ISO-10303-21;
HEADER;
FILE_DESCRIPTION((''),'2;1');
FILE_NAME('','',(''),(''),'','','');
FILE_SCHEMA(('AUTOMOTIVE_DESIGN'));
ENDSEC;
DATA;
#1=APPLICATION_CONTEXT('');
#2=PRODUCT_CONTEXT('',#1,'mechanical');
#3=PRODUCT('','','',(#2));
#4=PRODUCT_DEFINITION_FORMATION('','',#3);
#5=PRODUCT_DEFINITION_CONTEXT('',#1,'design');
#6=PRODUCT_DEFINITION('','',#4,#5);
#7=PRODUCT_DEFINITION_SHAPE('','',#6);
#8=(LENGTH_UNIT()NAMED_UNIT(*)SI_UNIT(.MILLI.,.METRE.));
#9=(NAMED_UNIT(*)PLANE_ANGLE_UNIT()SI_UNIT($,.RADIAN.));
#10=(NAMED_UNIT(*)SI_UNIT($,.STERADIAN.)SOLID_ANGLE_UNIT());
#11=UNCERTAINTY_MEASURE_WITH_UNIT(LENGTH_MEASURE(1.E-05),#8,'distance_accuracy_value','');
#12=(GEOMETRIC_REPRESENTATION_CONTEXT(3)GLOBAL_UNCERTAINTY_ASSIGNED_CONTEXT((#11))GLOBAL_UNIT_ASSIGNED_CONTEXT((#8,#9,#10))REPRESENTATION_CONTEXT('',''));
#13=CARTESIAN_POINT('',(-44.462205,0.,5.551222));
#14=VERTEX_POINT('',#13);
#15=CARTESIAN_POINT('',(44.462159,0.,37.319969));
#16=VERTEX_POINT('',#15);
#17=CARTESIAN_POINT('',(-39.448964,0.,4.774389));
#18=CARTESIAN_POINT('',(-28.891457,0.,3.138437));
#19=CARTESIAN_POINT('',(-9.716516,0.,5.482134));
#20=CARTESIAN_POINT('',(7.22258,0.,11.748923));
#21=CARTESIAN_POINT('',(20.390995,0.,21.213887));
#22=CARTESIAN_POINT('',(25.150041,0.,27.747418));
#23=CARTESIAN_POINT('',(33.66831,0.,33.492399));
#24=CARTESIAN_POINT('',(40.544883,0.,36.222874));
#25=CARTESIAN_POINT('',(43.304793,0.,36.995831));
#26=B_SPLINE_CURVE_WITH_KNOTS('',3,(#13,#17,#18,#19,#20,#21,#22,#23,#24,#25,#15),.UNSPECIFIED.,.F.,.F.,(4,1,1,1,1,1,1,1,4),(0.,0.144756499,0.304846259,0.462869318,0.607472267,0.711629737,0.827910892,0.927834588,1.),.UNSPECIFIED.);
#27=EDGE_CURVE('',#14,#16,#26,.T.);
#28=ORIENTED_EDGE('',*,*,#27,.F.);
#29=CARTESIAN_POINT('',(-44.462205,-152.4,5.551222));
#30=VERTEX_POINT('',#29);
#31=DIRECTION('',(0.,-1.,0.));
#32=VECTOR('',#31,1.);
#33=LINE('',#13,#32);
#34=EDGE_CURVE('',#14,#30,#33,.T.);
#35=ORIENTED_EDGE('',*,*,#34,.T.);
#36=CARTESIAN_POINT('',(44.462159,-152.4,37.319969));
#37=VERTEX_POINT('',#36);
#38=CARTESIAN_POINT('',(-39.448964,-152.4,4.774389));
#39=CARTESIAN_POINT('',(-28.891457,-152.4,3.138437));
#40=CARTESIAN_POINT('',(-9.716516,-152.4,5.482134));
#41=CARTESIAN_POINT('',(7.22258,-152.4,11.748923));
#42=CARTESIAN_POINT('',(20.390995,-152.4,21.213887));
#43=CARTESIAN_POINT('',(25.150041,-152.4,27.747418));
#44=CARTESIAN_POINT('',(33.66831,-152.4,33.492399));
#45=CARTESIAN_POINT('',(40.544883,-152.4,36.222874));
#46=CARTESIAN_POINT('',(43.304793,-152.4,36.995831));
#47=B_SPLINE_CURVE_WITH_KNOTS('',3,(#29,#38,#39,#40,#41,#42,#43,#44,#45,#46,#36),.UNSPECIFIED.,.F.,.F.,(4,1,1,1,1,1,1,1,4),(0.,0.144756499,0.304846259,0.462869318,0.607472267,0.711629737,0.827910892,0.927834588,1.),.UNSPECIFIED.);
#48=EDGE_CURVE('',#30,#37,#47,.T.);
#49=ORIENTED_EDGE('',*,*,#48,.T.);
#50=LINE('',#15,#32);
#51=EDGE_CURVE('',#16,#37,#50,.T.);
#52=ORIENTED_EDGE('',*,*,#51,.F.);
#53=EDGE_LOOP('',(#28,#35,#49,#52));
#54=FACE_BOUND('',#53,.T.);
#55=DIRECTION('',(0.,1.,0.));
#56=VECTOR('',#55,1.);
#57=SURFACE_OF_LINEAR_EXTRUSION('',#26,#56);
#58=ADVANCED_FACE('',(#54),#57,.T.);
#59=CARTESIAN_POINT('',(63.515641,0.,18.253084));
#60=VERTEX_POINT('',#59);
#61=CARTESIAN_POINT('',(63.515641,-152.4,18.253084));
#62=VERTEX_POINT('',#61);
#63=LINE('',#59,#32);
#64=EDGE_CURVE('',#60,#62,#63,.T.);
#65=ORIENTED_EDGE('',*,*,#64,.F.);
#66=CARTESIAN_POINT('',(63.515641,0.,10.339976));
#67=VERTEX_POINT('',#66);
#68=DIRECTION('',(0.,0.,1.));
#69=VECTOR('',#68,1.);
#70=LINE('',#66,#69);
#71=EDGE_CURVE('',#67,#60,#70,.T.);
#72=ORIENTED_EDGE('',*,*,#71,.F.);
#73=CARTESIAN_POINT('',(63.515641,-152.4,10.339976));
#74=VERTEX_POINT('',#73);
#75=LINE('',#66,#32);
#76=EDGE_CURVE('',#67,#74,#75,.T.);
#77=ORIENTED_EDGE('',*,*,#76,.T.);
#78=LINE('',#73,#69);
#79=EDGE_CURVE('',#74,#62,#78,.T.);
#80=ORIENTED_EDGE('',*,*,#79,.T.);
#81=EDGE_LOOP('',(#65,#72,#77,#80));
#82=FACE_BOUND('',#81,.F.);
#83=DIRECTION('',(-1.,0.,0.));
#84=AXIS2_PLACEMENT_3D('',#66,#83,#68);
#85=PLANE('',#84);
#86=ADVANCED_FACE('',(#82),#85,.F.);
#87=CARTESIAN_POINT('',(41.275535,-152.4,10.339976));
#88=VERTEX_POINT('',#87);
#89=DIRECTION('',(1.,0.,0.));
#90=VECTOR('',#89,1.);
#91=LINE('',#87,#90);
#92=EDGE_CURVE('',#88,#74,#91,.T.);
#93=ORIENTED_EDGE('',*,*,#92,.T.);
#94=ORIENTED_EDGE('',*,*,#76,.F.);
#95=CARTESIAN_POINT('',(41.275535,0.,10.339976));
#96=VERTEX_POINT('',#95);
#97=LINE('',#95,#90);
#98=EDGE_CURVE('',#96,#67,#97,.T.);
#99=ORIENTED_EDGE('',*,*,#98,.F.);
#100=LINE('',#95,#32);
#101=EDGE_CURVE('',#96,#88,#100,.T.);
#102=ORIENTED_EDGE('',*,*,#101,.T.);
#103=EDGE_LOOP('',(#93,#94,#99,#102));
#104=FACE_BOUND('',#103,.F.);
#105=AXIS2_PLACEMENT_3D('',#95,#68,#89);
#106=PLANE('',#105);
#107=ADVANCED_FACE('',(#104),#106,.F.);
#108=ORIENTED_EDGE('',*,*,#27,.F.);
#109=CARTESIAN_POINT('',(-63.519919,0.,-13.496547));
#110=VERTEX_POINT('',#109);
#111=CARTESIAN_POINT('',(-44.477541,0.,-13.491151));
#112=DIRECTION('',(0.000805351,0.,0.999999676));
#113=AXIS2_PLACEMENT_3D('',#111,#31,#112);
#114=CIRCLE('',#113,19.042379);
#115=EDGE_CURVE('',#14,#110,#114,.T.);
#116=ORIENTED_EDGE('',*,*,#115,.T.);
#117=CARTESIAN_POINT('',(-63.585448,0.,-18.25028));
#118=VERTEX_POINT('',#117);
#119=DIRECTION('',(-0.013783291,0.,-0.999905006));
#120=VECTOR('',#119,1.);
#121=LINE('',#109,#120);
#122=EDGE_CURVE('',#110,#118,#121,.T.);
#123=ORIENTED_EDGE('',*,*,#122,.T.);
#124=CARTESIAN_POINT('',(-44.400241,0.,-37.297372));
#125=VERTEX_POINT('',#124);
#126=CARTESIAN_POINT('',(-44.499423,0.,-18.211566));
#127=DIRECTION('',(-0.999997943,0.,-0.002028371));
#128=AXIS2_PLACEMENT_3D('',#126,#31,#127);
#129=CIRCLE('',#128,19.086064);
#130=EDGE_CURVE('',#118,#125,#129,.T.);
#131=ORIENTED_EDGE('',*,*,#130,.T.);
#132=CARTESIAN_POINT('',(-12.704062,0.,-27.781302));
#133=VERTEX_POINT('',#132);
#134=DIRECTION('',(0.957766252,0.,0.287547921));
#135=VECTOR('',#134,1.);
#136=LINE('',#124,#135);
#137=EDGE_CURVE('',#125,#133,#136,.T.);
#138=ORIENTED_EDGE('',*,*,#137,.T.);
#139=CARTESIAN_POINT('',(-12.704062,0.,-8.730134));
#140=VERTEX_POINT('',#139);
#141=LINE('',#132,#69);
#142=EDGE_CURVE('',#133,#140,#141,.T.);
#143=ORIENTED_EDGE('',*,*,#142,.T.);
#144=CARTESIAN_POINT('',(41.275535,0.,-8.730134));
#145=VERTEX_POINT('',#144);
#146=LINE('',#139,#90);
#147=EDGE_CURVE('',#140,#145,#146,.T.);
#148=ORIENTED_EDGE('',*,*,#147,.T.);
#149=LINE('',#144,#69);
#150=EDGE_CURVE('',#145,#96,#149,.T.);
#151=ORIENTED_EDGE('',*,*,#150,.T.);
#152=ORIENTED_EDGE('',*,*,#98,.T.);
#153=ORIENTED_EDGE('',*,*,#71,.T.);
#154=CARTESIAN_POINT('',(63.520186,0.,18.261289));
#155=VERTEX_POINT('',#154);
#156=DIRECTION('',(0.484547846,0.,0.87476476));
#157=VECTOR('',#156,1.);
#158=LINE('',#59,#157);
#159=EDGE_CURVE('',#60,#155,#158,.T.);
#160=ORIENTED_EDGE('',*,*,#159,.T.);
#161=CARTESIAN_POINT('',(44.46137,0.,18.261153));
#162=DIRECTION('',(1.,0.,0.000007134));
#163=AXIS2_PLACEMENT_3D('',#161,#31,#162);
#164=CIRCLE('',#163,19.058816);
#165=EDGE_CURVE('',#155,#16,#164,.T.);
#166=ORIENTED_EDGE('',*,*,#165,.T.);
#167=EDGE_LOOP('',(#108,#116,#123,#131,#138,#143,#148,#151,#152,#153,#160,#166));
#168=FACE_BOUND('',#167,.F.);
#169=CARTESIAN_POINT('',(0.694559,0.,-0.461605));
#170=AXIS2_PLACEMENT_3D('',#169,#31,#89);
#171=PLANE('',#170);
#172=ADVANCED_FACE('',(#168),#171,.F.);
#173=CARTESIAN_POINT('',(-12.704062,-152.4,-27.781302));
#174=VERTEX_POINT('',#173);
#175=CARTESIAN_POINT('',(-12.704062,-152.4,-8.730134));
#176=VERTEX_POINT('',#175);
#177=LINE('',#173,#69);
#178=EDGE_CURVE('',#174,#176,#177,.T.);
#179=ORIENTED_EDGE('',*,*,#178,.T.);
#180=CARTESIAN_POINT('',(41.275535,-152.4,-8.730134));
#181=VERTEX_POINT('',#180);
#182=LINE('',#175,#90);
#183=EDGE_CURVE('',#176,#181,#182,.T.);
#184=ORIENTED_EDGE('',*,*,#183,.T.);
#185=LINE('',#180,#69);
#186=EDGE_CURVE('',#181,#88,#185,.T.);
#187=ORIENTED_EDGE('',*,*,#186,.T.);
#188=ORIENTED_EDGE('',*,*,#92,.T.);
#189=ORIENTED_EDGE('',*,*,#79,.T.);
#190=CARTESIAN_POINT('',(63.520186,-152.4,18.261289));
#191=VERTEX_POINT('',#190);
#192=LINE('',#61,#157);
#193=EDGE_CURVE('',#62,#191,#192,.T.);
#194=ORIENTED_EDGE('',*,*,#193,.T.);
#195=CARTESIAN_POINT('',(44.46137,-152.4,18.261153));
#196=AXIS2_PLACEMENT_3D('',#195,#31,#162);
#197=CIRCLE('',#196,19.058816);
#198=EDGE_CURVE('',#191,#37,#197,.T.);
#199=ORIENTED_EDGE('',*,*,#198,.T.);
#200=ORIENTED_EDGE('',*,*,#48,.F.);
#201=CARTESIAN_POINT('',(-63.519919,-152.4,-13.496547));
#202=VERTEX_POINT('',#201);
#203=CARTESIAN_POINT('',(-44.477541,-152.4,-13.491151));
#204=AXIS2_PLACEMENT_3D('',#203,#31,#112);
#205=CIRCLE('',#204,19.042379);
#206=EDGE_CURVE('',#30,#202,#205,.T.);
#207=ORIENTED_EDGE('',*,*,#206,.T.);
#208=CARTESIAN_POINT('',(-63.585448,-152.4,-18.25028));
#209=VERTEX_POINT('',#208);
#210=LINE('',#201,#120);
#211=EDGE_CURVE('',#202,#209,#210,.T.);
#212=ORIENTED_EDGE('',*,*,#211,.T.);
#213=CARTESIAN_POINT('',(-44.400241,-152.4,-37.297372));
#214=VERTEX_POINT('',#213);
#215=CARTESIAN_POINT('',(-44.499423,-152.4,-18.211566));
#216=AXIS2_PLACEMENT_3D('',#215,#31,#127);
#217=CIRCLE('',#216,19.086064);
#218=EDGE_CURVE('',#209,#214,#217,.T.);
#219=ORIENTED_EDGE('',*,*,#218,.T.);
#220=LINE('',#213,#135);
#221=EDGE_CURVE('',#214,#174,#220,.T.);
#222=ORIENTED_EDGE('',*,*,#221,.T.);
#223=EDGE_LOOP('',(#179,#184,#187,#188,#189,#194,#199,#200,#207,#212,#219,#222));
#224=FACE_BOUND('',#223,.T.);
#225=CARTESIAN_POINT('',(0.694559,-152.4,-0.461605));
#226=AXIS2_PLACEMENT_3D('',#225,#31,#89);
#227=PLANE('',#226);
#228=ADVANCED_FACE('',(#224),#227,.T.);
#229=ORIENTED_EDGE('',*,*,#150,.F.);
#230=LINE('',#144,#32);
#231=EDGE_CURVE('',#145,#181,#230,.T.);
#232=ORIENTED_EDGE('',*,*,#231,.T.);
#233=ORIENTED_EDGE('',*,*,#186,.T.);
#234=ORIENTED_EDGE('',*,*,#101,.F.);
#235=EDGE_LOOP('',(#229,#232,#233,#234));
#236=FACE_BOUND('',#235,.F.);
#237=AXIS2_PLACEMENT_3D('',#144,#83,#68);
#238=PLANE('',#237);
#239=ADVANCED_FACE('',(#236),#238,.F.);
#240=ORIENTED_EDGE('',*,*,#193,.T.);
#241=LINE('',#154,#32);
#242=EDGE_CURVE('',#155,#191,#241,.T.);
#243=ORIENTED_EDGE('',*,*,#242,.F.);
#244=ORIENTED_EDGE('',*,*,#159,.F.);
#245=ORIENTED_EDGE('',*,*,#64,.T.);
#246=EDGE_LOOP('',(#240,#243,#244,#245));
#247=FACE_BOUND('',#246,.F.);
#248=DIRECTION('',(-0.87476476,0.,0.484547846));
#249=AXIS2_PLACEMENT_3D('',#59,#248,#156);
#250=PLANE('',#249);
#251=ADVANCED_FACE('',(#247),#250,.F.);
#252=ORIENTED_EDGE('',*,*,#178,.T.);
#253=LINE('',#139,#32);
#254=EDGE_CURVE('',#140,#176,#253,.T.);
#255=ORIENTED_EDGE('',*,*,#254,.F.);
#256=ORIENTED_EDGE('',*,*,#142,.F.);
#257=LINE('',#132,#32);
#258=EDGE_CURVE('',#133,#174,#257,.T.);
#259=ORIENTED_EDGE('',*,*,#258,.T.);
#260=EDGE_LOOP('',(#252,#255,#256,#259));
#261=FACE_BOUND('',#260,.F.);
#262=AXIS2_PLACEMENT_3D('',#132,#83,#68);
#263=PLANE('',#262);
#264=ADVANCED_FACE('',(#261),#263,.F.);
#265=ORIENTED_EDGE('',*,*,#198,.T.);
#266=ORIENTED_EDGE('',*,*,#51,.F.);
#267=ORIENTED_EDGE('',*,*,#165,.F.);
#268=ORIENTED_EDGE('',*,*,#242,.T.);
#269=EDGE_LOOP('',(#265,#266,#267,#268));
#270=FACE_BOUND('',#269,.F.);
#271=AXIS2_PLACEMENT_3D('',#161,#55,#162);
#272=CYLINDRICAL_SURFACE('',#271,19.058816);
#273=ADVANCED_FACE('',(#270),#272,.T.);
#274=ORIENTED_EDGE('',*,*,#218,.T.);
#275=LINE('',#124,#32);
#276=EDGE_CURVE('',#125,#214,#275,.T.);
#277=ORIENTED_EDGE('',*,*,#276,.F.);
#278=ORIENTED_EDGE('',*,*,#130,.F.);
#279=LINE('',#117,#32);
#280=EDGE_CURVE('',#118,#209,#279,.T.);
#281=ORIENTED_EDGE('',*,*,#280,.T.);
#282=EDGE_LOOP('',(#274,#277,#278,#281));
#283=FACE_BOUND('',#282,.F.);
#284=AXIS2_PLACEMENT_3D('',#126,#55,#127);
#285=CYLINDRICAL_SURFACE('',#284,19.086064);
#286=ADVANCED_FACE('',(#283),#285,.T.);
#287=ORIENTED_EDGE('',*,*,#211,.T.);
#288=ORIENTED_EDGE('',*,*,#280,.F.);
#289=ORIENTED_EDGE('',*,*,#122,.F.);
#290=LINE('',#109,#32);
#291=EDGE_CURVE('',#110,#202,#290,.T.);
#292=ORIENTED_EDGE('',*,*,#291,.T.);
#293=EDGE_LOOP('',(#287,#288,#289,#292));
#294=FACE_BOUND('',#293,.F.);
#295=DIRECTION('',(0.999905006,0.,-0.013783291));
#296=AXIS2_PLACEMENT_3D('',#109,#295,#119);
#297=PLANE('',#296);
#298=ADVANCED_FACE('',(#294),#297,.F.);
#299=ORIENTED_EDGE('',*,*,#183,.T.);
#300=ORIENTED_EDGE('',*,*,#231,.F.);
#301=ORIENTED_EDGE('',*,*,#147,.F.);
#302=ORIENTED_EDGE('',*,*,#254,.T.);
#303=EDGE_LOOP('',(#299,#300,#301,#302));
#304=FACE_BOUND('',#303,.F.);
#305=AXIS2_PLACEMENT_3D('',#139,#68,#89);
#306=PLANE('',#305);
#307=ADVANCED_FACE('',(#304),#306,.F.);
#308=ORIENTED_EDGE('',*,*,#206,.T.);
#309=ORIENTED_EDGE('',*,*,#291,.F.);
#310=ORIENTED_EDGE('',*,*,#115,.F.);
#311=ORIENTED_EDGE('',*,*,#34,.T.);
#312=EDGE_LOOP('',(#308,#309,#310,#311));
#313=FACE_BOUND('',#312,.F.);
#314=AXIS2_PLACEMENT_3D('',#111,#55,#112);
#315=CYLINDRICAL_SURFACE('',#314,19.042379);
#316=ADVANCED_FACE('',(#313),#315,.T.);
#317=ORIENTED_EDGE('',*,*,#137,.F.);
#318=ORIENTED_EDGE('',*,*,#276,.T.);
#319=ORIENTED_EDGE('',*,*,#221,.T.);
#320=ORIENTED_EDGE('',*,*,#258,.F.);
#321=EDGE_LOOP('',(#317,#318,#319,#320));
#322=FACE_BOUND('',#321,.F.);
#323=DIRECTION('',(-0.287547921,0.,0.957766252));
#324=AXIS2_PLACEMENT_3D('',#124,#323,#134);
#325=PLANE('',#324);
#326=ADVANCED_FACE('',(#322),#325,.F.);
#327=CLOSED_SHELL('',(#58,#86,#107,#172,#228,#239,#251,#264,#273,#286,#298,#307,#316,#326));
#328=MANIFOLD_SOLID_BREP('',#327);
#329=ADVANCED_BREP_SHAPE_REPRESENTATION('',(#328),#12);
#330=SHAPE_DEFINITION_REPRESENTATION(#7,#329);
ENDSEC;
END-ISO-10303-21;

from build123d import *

# Parameters (mm, degrees)
F1_DEPTH = 152.4


# Not quite as in the source:
# - a feature of the source that left no trace in its solid (it failed there, or was rolled back) is left out


with BuildPart() as f1:
    # F0 (on Front) → F1 (new body)
    with BuildSketch(Plane.XZ):
        with BuildLine():
            Line((63.5156407952, 10.3399762884), (63.5156407952, 18.2530842721))
            Line((63.5156407952, 18.2530842721), (63.5201856653, 18.2612892249))
            ThreePointArc((63.5201856653, 18.2612892249), (57.9382188033, 31.7375402421), (44.462159276, 37.3199693859))
            add(Edge.make_bspline(
                [(-44.4622051984, 5.5512220147), (-39.4489640202, 4.7743889629), (-28.8914565164, 3.1384371939), (-9.7165157973, 5.4821340103), (7.2225801678, 11.7489232999), (20.3909952314, 21.2138869863), (25.1500405302, 27.747417878), (33.6683098111, 33.4923986759), (40.5448826371, 36.2228742762), (43.3047932524, 36.9958307759), (44.462159276, 37.3199693859)],
                knots=[0, 0, 0, 0, 0.1447564987, 0.3048462595, 0.4628693182, 0.6074722668, 0.711629737, 0.827910892, 0.927834588, 1, 1, 1, 1], degree=3))
            ThreePointArc((-44.4622051984, 5.5512220147), (-57.9390215503, -0.0226415893), (-63.5199193484, -13.4965465253))
            Line((-63.5199193484, -13.4965465253), (-63.5854476605, -18.2502795355))
            ThreePointArc((-63.5854476605, -18.2502795355), (-57.9464666974, -31.7561163984), (-44.400241226, -37.2973717749))
            Line((-44.400241226, -37.2973717749), (-12.7040622756, -27.7813021094))
            Line((-12.7040622756, -27.7813021094), (-12.7040622756, -8.7301339954))
            Line((-12.7040622756, -8.7301339954), (41.2755347788, -8.7301339954))
            Line((41.2755347788, -8.7301339954), (41.2755347788, 10.3399762884))
            Line((41.2755347788, 10.3399762884), (63.5156407952, 10.3399762884))
        make_face()
    extrude(amount=F1_DEPTH)


solid = f1.part
